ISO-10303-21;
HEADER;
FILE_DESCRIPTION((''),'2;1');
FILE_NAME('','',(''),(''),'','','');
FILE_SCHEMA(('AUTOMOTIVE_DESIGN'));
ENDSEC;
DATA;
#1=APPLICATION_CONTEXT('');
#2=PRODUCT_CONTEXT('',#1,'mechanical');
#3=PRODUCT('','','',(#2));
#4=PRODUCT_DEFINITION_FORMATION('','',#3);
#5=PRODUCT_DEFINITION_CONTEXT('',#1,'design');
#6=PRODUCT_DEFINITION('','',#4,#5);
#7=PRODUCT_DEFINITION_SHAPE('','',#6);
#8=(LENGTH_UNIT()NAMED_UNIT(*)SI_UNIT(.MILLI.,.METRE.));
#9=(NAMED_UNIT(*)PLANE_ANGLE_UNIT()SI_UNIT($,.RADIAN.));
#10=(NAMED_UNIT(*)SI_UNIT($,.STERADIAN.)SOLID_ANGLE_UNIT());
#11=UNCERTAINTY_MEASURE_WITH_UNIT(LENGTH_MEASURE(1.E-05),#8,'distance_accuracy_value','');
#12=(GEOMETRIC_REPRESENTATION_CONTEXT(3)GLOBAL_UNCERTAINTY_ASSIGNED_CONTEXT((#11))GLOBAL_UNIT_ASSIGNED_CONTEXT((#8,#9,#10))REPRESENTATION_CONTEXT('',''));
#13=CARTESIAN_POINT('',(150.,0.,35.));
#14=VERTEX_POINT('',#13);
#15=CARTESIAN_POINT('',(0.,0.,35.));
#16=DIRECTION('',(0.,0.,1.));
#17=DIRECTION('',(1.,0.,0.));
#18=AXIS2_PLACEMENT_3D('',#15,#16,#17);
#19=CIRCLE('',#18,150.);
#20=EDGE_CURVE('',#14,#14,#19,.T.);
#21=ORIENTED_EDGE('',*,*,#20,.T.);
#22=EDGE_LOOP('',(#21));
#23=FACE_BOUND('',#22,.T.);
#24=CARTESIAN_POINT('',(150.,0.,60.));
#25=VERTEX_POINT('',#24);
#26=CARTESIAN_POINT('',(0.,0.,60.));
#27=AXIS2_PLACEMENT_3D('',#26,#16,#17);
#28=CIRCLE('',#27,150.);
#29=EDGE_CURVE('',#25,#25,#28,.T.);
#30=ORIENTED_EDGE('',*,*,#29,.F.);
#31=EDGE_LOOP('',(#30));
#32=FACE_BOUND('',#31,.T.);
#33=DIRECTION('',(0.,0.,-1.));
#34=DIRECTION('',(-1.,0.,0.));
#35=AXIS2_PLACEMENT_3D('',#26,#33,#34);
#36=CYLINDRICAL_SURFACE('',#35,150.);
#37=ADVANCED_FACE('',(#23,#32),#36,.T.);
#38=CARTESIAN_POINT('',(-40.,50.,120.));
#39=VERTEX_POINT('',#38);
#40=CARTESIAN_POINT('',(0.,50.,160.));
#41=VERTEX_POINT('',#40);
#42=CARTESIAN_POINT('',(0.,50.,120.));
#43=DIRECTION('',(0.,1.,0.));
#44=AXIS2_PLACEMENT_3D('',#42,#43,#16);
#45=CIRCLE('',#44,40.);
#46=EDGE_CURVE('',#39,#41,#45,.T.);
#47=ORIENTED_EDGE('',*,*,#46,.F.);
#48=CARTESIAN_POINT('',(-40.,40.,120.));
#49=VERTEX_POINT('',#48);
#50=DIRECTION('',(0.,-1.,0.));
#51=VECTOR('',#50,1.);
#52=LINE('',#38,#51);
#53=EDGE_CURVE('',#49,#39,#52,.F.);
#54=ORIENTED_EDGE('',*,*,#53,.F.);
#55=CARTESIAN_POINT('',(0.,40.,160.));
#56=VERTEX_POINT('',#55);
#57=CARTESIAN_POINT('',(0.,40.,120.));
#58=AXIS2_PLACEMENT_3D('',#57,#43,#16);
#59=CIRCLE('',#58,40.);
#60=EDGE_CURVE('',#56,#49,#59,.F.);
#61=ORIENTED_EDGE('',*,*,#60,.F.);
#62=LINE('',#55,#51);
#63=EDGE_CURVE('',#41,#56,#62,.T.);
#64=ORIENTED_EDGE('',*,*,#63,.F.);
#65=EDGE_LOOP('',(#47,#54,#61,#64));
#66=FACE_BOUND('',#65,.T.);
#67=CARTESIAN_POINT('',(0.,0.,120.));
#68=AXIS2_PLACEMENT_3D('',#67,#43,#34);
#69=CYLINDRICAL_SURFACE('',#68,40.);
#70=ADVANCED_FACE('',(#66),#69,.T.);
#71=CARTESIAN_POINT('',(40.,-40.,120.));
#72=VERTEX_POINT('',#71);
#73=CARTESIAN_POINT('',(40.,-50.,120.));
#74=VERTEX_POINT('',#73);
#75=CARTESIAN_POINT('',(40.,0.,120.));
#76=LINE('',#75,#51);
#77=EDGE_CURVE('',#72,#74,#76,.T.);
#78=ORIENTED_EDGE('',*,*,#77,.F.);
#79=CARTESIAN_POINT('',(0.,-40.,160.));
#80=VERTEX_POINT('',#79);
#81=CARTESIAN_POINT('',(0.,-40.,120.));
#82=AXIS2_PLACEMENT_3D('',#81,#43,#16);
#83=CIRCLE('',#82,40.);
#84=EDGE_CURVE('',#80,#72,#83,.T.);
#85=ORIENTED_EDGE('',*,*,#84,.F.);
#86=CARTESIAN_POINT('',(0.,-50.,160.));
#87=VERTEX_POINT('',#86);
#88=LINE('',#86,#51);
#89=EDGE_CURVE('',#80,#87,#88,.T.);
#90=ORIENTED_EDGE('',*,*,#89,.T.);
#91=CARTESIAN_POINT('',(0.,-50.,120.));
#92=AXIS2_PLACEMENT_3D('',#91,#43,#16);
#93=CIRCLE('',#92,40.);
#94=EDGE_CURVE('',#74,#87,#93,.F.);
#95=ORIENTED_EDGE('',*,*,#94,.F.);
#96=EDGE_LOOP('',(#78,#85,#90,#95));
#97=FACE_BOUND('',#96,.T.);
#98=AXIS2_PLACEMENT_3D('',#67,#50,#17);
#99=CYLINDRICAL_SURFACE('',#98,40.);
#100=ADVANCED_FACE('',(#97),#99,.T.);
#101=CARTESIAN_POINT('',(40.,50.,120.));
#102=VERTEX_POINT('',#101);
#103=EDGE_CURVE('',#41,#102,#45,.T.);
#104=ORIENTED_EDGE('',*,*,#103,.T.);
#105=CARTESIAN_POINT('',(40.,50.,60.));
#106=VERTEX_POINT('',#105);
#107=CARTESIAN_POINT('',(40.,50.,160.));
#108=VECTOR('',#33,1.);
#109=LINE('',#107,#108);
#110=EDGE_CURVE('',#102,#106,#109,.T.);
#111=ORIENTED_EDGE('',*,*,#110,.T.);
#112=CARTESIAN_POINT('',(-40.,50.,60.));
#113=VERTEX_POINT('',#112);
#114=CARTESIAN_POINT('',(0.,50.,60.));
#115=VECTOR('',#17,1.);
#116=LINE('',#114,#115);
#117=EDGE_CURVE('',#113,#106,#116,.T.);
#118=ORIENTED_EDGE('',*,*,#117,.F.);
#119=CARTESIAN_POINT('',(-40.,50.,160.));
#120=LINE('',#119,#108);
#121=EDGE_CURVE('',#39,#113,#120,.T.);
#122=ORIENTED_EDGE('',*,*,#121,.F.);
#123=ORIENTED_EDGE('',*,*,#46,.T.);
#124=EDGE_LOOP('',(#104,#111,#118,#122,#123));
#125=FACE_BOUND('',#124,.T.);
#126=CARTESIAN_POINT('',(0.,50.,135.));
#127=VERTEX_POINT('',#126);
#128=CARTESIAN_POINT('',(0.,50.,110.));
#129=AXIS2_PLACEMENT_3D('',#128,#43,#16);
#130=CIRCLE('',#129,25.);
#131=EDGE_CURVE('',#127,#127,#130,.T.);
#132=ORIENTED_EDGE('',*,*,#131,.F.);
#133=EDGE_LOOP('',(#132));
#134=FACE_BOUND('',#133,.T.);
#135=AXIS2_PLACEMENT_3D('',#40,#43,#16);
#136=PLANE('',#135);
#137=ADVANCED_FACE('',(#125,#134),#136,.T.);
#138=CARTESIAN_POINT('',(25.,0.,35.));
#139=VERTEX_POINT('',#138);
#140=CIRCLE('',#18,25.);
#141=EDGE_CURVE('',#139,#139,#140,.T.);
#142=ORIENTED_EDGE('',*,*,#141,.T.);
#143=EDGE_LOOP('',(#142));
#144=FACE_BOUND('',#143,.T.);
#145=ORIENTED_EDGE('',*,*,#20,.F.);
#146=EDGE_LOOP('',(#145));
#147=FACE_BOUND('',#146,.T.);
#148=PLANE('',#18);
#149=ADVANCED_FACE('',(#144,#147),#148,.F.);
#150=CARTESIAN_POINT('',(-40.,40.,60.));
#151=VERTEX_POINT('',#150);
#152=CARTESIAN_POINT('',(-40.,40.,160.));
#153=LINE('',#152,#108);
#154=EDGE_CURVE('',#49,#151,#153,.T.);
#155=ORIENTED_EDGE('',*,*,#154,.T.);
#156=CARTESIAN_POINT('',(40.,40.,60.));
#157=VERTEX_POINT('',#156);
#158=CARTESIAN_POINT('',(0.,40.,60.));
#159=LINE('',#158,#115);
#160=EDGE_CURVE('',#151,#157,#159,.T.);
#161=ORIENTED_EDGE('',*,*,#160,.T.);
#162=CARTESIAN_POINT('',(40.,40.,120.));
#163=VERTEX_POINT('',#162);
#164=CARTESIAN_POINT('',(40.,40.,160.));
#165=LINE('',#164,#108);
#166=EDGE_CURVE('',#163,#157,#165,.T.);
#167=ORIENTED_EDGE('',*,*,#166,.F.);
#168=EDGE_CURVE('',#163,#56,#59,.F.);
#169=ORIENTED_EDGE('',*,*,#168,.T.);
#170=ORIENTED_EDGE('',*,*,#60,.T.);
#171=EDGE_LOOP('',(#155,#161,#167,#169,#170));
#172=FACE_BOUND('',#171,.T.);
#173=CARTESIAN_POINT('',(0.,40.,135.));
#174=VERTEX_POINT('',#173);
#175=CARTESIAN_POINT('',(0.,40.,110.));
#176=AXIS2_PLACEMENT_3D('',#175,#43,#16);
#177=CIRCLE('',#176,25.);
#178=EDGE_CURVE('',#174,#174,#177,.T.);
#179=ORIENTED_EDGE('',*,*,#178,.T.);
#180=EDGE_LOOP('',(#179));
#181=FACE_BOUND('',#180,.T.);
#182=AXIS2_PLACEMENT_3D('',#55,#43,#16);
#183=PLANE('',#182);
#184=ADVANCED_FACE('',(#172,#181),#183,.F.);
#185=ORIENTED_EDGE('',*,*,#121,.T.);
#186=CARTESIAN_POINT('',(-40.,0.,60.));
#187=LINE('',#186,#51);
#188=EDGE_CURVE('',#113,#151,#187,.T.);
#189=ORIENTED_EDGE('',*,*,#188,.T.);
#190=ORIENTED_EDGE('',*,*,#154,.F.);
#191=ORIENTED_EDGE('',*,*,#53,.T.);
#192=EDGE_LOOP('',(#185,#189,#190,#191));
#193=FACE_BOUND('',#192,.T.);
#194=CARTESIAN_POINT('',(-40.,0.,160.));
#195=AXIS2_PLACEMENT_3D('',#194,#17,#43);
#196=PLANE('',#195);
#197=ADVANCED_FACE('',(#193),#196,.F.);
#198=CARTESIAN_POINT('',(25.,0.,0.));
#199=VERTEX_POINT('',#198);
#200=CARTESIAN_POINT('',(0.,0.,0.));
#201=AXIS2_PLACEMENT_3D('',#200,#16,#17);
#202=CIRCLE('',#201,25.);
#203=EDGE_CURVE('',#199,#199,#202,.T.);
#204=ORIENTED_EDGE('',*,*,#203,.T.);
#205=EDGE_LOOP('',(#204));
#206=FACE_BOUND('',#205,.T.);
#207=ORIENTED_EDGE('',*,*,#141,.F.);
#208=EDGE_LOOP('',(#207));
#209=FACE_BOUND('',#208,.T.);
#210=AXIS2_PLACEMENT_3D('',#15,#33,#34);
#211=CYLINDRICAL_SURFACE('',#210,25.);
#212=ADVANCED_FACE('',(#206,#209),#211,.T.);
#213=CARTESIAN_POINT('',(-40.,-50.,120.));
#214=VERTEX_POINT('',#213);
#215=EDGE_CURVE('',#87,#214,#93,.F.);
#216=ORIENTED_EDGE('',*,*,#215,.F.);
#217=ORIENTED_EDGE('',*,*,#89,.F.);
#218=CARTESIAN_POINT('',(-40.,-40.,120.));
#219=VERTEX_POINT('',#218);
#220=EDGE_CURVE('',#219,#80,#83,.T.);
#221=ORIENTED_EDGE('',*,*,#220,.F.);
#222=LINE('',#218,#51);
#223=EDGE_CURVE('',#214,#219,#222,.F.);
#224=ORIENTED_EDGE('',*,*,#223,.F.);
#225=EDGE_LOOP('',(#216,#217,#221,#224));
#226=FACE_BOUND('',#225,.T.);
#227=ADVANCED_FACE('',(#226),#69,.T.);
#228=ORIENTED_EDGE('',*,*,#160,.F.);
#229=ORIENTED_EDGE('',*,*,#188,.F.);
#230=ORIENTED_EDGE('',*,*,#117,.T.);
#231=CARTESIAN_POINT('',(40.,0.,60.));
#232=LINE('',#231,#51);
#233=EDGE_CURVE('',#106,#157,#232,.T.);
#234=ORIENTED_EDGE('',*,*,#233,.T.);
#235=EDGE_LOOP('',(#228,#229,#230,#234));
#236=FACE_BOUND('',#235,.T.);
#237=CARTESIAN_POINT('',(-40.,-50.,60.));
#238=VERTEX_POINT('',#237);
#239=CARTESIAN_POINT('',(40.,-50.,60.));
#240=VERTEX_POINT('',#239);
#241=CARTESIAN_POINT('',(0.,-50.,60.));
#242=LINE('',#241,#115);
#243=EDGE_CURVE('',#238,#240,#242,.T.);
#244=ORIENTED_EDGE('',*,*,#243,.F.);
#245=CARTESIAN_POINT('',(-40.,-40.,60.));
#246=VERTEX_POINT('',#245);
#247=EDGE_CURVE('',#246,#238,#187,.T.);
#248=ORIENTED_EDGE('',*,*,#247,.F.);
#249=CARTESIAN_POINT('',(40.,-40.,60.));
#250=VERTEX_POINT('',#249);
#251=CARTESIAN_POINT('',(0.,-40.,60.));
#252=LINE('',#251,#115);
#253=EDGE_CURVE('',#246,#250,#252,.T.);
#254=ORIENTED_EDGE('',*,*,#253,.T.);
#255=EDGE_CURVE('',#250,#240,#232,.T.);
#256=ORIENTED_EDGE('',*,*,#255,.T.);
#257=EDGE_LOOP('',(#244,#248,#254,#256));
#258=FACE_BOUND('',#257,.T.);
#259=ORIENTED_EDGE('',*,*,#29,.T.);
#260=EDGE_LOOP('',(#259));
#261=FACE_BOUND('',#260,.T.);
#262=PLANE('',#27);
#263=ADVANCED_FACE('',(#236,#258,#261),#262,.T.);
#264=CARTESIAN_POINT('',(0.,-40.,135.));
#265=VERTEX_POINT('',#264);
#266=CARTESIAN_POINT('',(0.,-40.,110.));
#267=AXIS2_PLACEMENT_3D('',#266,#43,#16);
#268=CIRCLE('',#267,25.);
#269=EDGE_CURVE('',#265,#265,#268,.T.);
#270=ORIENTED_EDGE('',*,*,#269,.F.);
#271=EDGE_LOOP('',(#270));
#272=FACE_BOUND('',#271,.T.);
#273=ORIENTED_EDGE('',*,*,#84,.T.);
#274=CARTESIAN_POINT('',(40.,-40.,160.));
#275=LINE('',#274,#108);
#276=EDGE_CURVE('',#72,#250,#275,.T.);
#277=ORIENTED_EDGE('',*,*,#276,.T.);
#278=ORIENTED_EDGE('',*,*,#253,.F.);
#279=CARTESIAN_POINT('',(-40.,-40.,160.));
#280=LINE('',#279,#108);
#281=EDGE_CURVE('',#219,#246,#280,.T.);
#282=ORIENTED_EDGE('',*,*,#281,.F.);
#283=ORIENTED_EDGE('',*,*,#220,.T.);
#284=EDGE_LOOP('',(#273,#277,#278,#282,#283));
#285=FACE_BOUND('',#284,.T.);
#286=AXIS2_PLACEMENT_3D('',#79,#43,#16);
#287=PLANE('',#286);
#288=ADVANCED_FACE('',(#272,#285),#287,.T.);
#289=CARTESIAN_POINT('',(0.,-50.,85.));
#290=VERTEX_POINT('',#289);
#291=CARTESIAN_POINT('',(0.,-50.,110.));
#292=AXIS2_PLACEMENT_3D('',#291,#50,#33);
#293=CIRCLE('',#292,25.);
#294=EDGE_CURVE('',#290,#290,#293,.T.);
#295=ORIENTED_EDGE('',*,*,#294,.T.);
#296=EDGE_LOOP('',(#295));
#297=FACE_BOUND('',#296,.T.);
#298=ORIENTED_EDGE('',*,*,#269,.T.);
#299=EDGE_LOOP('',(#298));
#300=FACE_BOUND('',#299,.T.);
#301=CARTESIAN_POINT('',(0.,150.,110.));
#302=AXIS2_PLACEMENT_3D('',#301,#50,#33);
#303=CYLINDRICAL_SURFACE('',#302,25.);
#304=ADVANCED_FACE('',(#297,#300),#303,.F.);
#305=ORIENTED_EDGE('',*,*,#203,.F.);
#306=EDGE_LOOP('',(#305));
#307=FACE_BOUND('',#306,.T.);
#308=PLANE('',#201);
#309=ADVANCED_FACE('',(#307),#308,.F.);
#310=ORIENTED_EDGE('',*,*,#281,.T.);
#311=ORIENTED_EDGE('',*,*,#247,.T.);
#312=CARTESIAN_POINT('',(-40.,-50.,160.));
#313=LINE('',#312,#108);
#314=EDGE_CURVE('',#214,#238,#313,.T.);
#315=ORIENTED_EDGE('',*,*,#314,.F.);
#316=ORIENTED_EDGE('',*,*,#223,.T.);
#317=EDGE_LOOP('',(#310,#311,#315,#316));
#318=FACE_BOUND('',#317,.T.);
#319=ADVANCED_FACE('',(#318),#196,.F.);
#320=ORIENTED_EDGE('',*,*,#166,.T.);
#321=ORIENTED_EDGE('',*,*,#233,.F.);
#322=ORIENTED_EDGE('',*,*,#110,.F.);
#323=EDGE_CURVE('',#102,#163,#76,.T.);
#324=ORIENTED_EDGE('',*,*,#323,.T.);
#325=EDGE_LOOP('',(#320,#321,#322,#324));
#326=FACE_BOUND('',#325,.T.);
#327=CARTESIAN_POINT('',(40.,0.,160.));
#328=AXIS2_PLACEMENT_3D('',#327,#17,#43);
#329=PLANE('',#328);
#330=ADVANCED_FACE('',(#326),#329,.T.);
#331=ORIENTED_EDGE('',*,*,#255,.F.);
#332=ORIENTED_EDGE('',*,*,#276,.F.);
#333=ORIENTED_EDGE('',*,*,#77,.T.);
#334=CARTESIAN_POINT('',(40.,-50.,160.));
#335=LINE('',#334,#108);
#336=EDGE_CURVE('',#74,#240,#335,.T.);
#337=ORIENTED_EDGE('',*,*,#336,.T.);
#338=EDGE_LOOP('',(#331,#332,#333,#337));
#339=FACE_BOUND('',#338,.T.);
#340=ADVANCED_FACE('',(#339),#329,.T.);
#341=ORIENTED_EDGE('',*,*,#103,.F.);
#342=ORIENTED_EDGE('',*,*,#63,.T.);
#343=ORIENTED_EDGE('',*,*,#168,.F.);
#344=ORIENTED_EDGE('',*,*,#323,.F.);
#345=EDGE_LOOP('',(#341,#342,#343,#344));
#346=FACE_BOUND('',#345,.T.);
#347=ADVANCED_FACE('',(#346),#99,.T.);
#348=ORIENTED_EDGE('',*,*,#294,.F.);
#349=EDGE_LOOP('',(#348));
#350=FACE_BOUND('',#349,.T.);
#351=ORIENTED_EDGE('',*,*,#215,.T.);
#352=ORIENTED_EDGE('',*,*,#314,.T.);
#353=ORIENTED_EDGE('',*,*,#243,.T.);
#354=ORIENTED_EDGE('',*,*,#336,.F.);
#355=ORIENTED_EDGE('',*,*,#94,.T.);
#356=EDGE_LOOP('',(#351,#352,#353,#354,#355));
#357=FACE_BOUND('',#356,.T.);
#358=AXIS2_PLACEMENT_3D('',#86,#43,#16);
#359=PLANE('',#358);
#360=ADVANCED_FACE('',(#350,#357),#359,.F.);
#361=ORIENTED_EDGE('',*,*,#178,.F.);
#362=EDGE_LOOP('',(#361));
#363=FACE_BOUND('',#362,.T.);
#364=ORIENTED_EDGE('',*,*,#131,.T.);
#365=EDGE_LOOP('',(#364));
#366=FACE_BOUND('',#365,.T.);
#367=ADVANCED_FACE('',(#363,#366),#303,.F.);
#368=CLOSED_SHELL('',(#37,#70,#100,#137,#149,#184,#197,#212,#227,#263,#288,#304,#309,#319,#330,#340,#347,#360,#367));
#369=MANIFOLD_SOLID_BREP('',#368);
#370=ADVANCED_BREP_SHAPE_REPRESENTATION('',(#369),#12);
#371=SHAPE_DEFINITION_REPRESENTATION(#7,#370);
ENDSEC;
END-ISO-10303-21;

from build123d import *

# Parameters (mm, degrees)
SKETCH1_R           = 25
BOSS_EXTRUDE1_DEPTH = 35
SKETCH2_R           = 150
BOSS_EXTRUDE2_DEPTH = 25
SKETCH3_W           = 80
SKETCH3_H           = 10
BOSS_EXTRUDE3_DEPTH = 100
SKETCH4_R           = 25
CUT_EXTRUDE1_DEPTH  = 297.816441593
FILLET1_R           = 40


with BuildPart() as part:
    # Sketch1 → Boss-Extrude1 (new body)
    with BuildSketch(Plane.XY):
        Circle(SKETCH1_R)
    extrude(amount=BOSS_EXTRUDE1_DEPTH)

    # Sketch2 → Boss-Extrude2 (add)
    with BuildSketch(Plane.XY.offset(35)):
        Circle(SKETCH2_R)
    extrude(amount=BOSS_EXTRUDE2_DEPTH)

    # Sketch3 → Boss-Extrude3 (add)
    with BuildSketch(Plane.XY.offset(60)):
        with Locations((0, -45)):
            Rectangle(SKETCH3_W, SKETCH3_H)
        with Locations((0, 45)):
            Rectangle(SKETCH3_W, SKETCH3_H)
    extrude(amount=BOSS_EXTRUDE3_DEPTH)

    # Sketch4 → Cut-Extrude1 (cut, through all)
    with BuildSketch(Plane.XZ.offset(50)):
        with Locations(Location((0, 110, 0), (0, 0, 90))):
            Circle(SKETCH4_R)
    extrude(amount=-CUT_EXTRUDE1_DEPTH, mode=Mode.SUBTRACT)

    # Fillet1
    fillet1_edges = [part.edges().sort_by_distance(p)[0] for p in [
        (40, -45, 160),
        (40, 45, 160),
        (-40, 45, 160),
        (-40, -45, 160),
    ]]
    fillet(fillet1_edges, radius=FILLET1_R - 0.0001)  # a hair under: the kernel refuses the full size


solid = part.part
